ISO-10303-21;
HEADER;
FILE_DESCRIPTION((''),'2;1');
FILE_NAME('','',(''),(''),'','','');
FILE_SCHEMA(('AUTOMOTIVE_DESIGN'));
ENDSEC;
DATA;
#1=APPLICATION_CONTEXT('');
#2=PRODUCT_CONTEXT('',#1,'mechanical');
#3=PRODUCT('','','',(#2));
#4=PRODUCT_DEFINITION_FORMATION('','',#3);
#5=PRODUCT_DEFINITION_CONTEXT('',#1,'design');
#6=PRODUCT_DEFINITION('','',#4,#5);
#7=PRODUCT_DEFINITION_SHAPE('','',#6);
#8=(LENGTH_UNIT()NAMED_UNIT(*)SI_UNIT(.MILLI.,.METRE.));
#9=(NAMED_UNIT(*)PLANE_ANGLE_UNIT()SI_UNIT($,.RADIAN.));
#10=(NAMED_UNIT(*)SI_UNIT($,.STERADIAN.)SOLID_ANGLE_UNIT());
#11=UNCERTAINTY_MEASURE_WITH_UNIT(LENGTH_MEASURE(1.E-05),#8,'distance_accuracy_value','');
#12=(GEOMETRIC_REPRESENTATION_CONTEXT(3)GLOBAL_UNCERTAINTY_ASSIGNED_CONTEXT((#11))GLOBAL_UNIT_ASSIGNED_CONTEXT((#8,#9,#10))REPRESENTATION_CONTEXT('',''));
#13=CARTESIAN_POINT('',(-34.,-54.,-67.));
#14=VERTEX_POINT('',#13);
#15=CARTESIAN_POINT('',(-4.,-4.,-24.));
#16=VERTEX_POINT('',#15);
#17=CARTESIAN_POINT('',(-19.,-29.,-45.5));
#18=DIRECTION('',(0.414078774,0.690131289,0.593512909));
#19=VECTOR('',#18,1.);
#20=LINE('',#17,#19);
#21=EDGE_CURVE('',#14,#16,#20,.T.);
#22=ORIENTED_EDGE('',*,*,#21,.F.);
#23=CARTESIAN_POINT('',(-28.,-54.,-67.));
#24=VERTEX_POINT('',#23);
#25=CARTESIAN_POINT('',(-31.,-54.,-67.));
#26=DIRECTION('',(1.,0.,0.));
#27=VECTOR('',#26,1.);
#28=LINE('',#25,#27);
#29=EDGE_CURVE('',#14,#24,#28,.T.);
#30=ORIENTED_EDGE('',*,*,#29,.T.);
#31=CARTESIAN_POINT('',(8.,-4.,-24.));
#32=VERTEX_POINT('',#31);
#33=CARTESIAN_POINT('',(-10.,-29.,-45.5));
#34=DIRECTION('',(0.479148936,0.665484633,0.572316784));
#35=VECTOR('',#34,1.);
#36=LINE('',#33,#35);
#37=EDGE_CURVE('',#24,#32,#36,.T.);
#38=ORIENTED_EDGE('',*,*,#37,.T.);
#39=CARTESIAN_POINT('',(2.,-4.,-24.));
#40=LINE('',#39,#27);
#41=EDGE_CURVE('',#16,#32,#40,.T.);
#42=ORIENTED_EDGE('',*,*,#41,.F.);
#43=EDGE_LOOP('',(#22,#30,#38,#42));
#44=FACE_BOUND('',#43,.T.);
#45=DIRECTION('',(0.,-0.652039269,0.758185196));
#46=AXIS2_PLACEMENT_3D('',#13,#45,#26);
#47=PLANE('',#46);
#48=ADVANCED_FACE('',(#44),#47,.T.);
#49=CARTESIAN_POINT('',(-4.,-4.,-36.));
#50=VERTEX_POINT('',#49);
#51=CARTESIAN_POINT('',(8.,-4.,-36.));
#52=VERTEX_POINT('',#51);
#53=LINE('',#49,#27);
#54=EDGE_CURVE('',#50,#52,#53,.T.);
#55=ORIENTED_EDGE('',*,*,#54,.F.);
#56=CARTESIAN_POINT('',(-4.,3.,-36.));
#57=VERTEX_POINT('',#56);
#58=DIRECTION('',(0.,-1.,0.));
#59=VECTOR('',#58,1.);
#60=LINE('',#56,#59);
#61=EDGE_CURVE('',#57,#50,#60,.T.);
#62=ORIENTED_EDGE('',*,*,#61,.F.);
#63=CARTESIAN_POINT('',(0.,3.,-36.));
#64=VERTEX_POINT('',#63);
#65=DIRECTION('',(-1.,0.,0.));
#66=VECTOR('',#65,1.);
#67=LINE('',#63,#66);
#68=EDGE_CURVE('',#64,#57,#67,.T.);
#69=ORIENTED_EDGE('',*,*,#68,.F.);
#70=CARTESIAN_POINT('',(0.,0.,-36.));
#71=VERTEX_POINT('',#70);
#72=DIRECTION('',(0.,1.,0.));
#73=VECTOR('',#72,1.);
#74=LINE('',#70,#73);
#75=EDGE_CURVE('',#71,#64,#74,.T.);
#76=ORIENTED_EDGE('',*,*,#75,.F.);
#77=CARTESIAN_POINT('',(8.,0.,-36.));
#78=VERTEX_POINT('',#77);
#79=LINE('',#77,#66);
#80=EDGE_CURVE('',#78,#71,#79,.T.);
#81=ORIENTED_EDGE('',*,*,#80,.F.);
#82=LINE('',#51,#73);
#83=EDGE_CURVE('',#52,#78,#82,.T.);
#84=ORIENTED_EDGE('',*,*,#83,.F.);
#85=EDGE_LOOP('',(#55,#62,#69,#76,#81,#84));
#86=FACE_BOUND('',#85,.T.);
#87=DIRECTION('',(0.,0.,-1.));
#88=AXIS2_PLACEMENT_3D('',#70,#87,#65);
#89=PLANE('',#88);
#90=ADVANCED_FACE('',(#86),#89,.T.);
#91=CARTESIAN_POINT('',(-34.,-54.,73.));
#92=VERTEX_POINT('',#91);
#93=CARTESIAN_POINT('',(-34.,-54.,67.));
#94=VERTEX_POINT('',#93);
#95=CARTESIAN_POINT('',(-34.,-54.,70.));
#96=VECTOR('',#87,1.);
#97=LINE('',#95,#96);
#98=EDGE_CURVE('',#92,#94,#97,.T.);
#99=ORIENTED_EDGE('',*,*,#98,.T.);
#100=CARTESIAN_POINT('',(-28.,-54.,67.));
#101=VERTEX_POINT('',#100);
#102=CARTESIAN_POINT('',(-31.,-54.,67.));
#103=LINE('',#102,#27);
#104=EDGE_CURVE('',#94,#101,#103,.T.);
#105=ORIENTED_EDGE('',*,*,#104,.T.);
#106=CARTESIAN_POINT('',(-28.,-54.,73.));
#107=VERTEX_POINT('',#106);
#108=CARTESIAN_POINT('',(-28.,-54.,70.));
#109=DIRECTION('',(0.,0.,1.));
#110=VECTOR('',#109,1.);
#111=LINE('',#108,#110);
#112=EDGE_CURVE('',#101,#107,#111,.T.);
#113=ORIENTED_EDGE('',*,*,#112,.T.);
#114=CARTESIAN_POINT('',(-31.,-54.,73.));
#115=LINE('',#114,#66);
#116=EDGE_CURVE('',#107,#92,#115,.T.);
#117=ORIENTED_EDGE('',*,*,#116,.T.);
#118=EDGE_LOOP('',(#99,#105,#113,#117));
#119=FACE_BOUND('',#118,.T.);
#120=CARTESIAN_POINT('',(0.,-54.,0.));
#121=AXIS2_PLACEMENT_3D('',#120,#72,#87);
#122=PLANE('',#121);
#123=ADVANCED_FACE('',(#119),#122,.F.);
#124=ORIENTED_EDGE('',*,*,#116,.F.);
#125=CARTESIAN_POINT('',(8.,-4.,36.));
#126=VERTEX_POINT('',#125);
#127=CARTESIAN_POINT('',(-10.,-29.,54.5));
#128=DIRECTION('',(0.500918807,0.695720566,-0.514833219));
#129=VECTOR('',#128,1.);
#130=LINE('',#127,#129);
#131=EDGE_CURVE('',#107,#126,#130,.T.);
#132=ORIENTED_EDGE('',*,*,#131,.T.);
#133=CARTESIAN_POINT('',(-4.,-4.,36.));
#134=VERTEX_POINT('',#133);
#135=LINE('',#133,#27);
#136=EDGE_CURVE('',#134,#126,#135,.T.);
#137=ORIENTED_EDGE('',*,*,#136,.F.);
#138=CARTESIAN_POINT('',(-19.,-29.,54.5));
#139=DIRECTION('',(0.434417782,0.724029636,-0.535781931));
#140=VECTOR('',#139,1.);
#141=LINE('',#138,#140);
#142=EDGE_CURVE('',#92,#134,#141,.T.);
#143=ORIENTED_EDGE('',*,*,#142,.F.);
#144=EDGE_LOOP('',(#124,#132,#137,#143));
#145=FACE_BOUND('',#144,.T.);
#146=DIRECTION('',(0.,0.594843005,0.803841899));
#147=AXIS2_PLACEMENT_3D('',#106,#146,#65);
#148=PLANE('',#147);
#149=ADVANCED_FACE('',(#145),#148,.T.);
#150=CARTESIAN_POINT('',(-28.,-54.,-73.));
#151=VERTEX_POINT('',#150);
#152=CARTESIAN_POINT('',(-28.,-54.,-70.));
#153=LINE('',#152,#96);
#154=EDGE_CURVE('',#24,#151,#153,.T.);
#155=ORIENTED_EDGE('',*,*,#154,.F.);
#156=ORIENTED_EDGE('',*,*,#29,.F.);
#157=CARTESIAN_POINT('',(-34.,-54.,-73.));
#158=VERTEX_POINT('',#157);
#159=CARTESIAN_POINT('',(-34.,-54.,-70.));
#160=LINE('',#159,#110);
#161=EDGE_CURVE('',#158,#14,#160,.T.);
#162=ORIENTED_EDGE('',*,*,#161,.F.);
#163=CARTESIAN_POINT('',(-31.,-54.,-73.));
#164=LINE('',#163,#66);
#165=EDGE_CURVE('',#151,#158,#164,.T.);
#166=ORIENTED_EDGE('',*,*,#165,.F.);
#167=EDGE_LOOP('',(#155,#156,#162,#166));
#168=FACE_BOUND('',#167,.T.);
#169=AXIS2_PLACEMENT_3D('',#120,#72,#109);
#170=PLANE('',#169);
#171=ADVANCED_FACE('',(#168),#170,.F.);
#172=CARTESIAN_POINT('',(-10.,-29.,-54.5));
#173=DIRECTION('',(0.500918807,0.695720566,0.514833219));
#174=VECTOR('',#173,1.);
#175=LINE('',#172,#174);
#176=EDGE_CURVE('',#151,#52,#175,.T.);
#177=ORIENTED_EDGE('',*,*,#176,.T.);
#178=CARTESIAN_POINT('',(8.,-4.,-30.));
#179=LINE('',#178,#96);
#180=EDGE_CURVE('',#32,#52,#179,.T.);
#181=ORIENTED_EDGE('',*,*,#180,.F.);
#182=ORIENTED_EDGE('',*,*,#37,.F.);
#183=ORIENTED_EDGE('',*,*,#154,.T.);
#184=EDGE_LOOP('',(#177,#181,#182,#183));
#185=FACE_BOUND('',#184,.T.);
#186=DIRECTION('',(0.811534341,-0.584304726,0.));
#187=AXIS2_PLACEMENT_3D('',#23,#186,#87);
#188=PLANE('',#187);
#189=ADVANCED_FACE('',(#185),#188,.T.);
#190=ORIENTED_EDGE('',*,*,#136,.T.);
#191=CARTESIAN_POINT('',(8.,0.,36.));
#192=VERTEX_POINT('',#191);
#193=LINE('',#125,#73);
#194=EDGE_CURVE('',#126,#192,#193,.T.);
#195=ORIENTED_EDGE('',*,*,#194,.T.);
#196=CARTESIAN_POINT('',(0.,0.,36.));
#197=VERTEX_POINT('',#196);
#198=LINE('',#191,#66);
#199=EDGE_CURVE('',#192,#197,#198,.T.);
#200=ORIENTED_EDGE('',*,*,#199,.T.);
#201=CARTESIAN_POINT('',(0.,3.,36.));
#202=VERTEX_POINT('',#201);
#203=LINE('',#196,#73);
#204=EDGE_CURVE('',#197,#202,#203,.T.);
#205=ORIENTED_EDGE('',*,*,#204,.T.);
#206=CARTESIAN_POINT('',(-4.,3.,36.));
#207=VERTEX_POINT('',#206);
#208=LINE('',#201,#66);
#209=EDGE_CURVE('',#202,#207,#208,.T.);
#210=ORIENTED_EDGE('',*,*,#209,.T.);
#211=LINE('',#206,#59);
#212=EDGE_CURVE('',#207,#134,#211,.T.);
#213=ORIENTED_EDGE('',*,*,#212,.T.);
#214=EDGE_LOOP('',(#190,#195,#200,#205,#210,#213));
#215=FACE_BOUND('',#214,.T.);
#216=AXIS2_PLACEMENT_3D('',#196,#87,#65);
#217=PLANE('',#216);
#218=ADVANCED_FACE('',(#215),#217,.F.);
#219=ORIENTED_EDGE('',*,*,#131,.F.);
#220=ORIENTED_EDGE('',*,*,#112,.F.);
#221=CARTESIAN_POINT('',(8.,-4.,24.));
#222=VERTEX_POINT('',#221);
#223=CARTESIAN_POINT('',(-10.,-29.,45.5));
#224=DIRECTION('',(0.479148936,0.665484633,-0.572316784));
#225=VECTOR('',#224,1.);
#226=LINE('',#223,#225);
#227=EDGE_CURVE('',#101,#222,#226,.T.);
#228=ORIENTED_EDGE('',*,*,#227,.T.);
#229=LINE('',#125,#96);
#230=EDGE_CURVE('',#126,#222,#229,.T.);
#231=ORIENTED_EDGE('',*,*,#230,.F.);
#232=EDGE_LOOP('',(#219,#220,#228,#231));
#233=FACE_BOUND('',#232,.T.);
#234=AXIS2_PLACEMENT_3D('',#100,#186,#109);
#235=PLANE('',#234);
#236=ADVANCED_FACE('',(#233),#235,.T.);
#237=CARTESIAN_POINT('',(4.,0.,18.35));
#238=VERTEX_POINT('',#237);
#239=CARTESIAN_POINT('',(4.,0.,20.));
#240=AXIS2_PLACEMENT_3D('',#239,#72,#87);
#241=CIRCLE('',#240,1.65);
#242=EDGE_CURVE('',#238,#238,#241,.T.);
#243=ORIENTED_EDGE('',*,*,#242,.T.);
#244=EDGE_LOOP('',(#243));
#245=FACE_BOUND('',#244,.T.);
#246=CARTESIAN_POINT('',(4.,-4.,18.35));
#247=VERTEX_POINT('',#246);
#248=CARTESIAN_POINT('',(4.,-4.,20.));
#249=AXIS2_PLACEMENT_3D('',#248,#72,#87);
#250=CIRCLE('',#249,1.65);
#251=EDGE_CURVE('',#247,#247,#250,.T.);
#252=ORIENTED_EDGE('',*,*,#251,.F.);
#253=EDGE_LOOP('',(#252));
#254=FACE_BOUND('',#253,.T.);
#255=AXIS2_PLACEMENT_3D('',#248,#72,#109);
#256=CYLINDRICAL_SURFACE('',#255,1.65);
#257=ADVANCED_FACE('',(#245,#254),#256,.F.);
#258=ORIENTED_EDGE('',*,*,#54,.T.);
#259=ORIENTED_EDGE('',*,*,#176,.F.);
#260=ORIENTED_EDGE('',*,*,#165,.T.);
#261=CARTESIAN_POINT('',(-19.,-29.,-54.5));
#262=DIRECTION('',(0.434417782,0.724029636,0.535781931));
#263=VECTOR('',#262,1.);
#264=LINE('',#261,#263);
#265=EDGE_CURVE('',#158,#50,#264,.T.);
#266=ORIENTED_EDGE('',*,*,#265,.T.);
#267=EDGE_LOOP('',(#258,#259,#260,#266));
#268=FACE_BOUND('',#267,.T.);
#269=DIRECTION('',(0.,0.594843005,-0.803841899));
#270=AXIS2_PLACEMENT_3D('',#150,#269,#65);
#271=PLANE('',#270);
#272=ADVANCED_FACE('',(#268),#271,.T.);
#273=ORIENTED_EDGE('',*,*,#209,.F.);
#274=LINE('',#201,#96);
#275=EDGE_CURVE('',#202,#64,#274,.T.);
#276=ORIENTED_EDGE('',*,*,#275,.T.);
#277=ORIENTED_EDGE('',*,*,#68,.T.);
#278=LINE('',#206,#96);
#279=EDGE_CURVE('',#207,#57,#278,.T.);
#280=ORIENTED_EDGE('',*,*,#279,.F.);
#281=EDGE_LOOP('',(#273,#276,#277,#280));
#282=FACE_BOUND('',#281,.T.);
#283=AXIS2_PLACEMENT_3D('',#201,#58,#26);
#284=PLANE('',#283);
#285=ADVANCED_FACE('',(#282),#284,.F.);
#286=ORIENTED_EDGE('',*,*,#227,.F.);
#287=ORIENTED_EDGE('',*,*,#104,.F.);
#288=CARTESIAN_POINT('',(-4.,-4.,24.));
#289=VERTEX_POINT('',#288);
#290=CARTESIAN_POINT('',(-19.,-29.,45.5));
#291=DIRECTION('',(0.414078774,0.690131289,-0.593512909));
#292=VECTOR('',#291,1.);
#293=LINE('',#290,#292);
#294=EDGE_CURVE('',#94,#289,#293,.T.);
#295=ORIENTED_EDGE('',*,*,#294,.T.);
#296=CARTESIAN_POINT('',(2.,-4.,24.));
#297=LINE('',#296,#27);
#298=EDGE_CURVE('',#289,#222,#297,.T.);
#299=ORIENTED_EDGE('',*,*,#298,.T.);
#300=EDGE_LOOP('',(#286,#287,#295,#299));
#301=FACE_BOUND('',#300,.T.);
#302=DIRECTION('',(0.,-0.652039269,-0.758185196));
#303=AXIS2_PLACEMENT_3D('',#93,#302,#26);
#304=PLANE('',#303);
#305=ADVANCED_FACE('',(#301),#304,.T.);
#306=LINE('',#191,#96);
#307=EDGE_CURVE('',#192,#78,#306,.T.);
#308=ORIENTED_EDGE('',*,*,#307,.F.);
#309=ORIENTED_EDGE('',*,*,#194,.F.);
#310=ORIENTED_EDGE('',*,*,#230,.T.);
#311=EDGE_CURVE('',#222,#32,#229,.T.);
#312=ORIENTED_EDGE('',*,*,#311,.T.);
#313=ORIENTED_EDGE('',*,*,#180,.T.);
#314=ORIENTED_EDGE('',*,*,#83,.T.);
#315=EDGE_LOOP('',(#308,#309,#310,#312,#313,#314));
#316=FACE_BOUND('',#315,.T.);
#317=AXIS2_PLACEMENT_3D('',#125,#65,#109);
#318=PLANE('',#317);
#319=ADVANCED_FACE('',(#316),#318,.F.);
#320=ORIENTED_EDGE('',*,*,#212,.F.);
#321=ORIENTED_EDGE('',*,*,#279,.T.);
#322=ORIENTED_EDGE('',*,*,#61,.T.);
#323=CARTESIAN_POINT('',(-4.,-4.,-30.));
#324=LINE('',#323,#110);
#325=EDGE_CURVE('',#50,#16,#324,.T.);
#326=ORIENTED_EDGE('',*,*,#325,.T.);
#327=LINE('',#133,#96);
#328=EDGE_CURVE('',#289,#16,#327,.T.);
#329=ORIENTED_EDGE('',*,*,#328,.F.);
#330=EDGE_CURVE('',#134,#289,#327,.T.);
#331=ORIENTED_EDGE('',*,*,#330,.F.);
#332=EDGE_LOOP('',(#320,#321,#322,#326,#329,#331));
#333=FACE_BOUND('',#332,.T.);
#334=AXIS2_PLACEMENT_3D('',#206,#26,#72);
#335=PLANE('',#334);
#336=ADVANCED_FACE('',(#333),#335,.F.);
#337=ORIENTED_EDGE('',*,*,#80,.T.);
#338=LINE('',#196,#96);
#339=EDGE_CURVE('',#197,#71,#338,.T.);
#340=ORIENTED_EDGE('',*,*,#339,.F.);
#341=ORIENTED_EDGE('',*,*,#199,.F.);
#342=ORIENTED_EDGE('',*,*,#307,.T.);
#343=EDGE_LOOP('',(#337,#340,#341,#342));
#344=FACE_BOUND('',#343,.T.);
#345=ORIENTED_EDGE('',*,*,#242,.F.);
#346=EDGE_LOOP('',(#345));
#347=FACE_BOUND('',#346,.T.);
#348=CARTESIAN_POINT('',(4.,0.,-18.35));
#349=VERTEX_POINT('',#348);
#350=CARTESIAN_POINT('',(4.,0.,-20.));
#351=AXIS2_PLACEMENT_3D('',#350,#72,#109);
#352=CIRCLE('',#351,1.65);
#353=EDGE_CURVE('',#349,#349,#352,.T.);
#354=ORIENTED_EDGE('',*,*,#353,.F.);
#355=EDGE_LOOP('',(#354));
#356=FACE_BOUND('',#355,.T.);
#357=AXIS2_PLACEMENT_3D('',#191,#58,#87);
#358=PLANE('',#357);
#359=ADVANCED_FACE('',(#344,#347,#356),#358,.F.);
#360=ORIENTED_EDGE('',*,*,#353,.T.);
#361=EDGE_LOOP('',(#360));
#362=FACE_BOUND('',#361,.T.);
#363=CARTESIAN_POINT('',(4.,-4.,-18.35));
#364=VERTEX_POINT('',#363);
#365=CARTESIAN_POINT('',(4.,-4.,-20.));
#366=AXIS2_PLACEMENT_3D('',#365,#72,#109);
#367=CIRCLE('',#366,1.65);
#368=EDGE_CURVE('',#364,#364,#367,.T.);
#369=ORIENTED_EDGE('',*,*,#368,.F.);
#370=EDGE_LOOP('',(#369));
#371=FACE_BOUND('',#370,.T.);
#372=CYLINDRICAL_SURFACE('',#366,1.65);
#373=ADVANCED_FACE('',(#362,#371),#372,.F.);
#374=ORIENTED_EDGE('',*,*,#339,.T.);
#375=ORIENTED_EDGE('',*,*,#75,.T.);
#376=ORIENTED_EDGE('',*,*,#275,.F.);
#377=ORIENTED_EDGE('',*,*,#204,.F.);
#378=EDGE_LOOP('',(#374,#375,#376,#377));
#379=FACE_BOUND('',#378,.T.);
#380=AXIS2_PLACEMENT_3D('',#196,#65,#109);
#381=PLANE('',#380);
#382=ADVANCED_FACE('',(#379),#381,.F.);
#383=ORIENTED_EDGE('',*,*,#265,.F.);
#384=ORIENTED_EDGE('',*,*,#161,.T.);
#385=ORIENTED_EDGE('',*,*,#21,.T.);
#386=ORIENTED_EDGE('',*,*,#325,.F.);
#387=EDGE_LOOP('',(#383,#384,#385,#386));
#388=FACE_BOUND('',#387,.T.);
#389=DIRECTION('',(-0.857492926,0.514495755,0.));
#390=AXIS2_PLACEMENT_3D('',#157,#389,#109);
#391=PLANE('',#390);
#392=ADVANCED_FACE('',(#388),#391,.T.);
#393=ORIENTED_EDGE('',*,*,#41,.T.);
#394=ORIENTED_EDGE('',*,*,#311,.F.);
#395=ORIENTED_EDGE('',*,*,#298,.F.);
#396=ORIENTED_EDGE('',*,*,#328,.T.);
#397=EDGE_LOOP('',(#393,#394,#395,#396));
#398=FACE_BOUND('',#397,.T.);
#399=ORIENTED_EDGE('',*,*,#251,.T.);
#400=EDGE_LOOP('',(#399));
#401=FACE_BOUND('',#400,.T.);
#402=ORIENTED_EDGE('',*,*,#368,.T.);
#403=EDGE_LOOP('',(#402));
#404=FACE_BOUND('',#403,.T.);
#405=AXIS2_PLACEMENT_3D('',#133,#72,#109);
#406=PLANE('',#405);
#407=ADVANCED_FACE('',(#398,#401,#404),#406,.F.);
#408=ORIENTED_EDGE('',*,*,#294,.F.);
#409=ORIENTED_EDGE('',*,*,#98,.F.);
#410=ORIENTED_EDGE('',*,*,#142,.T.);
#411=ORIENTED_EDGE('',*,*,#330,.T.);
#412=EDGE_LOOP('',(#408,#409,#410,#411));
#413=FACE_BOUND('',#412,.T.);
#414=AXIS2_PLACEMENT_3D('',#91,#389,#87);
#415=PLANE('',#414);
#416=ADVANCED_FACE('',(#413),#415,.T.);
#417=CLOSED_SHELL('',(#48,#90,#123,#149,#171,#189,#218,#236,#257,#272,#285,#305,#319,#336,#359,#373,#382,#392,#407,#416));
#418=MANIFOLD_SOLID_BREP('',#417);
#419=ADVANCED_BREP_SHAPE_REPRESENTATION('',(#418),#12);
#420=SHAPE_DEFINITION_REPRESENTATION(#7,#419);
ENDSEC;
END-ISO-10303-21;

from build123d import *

# Parameters (mm, degrees)
EXTRUDE_1_DEPTH     = 36
SKETCH_2_R          = 1.65
CUT_EXTRUDE_1_DEPTH = 38.094473982


with BuildPart() as part:
    # 草图1 → 凸台-拉伸1 (new, symmetric)
    with BuildSketch(Plane.XY):
        Polygon((0, 0), (0, 3), (-4, 3), (-4, -4), (8, -4), (8, 0), align=None)
    extrude(amount=EXTRUDE_1_DEPTH, both=True)

    # 草图2 → 切除-拉伸1 (cut, through all)
    with BuildSketch(Plane(origin=(0, 0, 0), x_dir=(1, 0, 0), z_dir=(0, 1, 0))):
        with Locations(Location((4, 20, 0), (0, 0, 270))):
            Circle(SKETCH_2_R)
        with Locations(Location((4, -20, 0), (0, 0, 90))):
            Circle(SKETCH_2_R)
    extrude(amount=-CUT_EXTRUDE_1_DEPTH, mode=Mode.SUBTRACT)

    # 边界1: read off the stored shape, not the designer's step
    # 边界1: loft between two sections, ruled curve by curve
    other_1_from = [
        Edge.make_line((-34, -54, -73), (-34, -54, -67)),
        Edge.make_line((-34, -54, -67), (-28, -54, -67)),
        Edge.make_line((-28, -54, -67), (-28, -54, -73)),
        Edge.make_line((-28, -54, -73), (-34, -54, -73)),
    ]
    other_1_to = [
        Edge.make_line((-4, -4, -36), (-4, -4, -24)),
        Edge.make_line((-4, -4, -24), (8, -4, -24)),
        Edge.make_line((8, -4, -24), (8, -4, -36)),
        Edge.make_line((8, -4, -36), (-4, -4, -36)),
    ]
    other_1 = Solid(Shell([*[Face.make_surface_from_curves(other_1_from[k], other_1_to[k]) for k in range(4)], Face(Wire(other_1_from)), Face(Wire(other_1_to))]))
    add(other_1)

    # 镜向2: 边界1 across plane
    add(other_1.mirror(Plane.XY))


solid = part.part
